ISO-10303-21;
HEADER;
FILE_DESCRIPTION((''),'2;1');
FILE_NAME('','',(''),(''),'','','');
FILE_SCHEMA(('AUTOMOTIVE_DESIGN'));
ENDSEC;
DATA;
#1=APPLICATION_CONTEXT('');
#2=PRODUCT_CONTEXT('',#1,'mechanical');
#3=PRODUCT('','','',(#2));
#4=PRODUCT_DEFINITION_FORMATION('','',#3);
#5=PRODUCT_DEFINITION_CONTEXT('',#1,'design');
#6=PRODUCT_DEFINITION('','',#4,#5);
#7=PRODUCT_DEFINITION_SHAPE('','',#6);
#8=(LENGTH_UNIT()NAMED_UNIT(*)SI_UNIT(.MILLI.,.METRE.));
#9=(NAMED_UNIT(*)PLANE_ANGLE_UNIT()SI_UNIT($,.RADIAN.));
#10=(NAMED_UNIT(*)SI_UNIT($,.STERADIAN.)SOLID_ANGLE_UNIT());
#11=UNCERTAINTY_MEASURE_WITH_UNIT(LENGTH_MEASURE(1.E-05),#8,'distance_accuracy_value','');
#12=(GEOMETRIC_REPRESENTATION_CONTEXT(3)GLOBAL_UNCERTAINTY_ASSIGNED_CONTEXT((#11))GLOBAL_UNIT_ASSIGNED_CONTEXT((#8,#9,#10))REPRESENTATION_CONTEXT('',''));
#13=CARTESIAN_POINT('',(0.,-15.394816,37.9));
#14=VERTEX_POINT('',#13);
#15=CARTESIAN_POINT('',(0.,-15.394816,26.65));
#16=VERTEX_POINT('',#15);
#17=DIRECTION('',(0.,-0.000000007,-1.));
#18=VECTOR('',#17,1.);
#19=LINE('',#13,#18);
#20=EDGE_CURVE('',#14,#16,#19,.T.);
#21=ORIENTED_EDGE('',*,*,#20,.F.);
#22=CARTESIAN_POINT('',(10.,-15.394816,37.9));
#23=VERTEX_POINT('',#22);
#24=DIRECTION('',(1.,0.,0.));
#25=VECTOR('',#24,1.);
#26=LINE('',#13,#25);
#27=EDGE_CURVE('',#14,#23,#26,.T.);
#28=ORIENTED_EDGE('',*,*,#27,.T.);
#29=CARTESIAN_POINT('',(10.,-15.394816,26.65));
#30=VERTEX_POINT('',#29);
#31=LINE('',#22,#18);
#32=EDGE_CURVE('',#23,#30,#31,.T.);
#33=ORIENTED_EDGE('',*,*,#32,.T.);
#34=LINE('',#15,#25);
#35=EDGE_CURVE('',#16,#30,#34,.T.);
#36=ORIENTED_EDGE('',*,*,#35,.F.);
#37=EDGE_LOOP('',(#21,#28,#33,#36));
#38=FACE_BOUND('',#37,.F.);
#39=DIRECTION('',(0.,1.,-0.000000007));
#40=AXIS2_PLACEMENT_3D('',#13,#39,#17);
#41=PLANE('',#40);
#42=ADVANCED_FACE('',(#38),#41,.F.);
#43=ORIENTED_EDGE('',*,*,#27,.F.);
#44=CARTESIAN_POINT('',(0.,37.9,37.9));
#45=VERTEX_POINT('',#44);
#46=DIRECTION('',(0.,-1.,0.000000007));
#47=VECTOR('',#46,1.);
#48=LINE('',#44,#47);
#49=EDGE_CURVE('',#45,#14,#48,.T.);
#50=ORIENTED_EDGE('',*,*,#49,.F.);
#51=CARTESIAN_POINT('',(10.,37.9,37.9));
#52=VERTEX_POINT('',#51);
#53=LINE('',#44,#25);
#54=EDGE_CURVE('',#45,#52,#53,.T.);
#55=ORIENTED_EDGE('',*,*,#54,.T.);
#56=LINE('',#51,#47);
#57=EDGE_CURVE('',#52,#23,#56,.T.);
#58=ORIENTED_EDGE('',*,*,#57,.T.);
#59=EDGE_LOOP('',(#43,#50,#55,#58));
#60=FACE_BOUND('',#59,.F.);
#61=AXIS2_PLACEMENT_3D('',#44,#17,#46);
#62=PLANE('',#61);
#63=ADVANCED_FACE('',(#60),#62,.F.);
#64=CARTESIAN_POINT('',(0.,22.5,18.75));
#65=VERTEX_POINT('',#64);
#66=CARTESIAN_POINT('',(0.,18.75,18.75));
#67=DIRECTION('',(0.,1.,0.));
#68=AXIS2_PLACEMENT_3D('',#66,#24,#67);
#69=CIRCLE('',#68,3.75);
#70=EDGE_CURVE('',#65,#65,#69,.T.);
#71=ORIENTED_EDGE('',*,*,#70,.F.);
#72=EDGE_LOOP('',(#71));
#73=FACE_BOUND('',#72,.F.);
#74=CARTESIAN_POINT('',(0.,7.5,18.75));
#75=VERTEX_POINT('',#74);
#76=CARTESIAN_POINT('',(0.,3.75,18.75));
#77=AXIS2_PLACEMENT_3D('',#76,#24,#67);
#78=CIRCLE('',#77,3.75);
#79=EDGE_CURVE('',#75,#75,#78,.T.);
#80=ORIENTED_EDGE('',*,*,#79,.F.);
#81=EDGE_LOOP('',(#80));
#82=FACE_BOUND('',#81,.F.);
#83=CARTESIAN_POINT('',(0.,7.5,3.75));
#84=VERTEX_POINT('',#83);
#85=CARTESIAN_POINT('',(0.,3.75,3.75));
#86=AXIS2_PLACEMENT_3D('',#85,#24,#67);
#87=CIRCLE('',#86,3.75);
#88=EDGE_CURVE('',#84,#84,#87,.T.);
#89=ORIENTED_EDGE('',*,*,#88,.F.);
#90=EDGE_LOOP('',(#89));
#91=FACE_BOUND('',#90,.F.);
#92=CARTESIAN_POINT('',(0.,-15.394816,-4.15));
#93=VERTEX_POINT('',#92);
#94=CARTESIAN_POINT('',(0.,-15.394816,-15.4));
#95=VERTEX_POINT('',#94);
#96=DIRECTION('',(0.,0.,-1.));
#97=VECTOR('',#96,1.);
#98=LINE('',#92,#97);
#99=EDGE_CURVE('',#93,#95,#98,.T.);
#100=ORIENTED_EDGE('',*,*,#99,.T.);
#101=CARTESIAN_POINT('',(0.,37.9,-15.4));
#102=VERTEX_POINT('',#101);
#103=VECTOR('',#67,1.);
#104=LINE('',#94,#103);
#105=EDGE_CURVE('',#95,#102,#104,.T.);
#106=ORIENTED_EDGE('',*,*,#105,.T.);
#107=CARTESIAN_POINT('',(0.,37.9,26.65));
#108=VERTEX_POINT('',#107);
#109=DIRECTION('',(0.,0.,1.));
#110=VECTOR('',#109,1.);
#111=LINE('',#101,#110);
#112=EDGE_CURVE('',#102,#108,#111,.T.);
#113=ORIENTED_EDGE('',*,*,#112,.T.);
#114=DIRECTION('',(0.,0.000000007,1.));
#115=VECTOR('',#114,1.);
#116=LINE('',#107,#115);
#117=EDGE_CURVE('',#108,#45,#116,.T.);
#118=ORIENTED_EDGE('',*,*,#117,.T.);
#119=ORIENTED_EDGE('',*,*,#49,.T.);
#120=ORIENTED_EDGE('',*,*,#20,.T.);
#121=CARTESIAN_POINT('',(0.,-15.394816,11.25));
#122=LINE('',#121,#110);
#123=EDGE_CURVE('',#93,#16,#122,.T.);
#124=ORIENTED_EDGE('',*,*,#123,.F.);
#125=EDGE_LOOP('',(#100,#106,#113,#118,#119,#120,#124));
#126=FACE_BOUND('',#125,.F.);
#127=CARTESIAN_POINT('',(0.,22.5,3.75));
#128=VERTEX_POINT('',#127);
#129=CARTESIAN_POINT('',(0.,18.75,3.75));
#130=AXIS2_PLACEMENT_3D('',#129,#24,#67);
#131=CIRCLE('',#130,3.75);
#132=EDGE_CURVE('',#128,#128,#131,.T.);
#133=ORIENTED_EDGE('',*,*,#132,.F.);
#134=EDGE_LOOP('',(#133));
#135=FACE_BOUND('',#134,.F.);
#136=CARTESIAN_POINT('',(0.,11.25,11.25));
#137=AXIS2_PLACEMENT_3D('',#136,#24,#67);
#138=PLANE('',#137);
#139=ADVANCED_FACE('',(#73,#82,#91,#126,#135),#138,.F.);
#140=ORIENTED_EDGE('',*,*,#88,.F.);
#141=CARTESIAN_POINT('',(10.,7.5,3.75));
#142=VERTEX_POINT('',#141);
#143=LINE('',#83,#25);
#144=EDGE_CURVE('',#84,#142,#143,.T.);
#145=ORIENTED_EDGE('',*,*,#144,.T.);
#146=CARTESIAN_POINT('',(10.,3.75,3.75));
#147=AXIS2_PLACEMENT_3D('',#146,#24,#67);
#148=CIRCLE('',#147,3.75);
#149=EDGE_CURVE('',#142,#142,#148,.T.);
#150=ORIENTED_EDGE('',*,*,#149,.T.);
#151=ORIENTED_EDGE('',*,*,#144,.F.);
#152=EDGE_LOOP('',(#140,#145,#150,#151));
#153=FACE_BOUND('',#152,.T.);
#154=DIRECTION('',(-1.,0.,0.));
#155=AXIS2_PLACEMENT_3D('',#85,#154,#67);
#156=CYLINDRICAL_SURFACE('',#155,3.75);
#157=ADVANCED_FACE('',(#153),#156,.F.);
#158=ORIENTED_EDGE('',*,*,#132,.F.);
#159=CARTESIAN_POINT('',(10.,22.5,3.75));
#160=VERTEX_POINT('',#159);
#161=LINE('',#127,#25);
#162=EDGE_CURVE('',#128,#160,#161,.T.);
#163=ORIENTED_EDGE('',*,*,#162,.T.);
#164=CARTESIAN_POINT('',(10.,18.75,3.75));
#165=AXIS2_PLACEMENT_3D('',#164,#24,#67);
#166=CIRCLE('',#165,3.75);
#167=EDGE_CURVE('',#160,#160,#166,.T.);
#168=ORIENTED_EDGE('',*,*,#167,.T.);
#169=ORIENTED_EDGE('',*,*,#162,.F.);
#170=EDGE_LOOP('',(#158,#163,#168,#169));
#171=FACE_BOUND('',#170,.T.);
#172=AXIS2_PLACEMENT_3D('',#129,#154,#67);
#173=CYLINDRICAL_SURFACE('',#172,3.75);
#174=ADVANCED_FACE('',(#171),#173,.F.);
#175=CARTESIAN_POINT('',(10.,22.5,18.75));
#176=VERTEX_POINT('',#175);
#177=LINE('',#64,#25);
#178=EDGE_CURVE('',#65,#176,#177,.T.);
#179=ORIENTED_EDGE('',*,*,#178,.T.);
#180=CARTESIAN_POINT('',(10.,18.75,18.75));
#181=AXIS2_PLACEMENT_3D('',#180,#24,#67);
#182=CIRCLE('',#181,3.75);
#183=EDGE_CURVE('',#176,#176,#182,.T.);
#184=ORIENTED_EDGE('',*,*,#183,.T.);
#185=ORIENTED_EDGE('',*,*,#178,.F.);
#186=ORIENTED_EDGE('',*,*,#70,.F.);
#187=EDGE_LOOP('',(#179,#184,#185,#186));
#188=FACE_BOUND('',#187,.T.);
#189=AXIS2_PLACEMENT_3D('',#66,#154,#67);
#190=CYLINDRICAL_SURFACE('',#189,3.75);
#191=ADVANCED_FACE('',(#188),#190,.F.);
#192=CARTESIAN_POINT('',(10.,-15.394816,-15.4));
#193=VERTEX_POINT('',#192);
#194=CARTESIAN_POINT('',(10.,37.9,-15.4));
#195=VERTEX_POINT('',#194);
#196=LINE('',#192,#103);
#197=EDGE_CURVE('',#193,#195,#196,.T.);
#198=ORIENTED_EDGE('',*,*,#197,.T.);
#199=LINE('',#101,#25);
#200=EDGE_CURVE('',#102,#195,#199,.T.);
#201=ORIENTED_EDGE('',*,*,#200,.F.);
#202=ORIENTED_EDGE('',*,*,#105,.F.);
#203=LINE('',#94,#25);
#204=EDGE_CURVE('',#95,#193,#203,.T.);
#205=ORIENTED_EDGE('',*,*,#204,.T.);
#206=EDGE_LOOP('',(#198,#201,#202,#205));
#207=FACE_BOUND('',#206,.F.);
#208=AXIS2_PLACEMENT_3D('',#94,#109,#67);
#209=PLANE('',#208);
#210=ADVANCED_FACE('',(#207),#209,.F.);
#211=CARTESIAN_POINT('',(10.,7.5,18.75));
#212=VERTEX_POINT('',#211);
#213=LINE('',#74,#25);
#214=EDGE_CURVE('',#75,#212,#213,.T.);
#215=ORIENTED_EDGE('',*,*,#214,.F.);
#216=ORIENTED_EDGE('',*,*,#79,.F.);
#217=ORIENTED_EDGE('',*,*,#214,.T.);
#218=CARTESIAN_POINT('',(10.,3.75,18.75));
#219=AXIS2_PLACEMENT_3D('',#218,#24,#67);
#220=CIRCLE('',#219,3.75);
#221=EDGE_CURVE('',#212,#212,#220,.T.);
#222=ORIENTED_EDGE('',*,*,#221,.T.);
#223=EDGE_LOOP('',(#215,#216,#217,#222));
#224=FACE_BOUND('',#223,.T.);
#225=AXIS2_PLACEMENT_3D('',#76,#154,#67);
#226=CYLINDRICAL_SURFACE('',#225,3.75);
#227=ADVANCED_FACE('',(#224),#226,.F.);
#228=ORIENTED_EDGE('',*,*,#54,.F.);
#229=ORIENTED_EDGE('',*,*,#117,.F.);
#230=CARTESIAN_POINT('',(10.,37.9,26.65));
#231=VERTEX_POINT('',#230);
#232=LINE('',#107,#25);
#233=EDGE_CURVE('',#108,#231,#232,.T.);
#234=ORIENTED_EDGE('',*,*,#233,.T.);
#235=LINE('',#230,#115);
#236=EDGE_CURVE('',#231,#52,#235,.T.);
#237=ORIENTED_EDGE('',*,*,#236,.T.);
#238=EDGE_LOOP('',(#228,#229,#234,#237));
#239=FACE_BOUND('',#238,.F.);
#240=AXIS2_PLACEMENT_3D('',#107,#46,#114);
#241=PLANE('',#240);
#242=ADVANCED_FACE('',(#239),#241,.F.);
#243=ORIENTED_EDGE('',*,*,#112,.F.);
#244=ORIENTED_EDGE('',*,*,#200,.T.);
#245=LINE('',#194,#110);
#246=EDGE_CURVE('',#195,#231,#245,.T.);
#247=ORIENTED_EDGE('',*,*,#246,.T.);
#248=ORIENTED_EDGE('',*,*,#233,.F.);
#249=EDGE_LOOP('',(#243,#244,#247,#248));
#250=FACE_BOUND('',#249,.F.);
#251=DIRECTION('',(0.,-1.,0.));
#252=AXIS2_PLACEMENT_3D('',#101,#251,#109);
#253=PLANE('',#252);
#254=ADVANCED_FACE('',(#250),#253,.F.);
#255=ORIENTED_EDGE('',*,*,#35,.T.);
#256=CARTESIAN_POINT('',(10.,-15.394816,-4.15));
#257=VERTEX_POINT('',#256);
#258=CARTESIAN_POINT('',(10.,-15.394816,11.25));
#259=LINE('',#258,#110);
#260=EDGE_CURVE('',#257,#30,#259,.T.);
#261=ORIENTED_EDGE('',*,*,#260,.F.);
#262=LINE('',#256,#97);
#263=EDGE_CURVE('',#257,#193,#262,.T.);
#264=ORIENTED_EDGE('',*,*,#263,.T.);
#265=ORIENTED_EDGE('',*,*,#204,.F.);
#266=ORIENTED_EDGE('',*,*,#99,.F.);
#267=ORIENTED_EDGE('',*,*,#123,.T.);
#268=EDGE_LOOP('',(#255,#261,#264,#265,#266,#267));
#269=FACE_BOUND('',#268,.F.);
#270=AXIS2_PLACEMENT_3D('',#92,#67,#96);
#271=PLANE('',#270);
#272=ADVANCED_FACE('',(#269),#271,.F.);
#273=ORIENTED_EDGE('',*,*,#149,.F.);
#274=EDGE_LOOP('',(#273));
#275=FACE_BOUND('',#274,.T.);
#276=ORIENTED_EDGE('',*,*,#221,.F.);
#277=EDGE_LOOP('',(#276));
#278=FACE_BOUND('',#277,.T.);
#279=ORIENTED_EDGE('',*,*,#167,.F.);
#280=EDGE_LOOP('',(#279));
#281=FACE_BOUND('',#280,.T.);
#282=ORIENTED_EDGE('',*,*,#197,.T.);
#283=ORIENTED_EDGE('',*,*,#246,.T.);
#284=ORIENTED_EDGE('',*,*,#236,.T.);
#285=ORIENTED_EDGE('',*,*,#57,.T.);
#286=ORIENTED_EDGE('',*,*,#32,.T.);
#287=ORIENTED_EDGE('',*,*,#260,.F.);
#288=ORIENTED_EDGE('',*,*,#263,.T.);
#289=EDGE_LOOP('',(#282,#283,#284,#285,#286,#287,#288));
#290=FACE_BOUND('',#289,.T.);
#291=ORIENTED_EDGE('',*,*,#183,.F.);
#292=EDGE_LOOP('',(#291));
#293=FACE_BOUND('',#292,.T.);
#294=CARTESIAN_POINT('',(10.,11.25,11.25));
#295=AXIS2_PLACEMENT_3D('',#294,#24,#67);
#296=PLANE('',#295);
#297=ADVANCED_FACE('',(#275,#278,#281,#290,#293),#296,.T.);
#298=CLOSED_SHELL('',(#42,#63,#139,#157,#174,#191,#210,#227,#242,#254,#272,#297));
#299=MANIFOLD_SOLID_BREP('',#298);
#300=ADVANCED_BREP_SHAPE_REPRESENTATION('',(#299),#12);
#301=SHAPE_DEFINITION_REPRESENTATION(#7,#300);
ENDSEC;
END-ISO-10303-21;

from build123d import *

# Parameters (mm, degrees)
F0_R     = 3.75
F0_W     = 11.25
F0_H     = 30.8000000767
F0_W_2   = 11.2448162399
F0_H_2   = 30.8000003636
F1_DEPTH = 10


# Not quite as in the source:
# - ends of sketch curves that miss each other by under 0.0002 mm in the source are joined


with BuildPart() as f1:
    # F0 (on Right) → F1 (new body)
    with BuildSketch(Plane.YZ):
        Polygon((11.25, 26.6500003636), (-4.1499999352, 26.6500003636), (-4.1499999352, -4.15), (11.25, -4.15), (26.65, -4.15), (26.65, 26.65), align=None)
        with Locations((3.75, 3.75)):
            Circle(F0_R, mode=Mode.SUBTRACT)
        with Locations((18.75, 3.75)):
            Circle(F0_R, mode=Mode.SUBTRACT)
        with Locations((3.75, 18.75)):
            Circle(F0_R, mode=Mode.SUBTRACT)
        with Locations((18.75, 18.75)):
            Circle(F0_R, mode=Mode.SUBTRACT)
        with Locations((32.275, 11.2500000384)):
            Rectangle(F0_W, F0_H)
        Polygon((11.25, -4.15), (-4.1499999352, -4.15), (-15.3948161751, -4.15), (-15.3948161751, -15.4), (-4.1499999352, -15.4), (26.65, -15.4), (37.9, -15.4), (37.9, -4.15), (26.65, -4.15), align=None)
        Polygon((-15.3948161751, 26.6500003636), (-4.1499999352, 26.6500002869), (11.25, 26.6500003636), (26.65, 26.65), (37.9, 26.65), (37.9000000767, 37.9), (-15.3948160984, 37.9000003636), align=None)
        with Locations((-9.7724080551, 11.2500001818)):
            Rectangle(F0_W_2, F0_H_2)
    extrude(amount=F1_DEPTH)


solid = f1.part
